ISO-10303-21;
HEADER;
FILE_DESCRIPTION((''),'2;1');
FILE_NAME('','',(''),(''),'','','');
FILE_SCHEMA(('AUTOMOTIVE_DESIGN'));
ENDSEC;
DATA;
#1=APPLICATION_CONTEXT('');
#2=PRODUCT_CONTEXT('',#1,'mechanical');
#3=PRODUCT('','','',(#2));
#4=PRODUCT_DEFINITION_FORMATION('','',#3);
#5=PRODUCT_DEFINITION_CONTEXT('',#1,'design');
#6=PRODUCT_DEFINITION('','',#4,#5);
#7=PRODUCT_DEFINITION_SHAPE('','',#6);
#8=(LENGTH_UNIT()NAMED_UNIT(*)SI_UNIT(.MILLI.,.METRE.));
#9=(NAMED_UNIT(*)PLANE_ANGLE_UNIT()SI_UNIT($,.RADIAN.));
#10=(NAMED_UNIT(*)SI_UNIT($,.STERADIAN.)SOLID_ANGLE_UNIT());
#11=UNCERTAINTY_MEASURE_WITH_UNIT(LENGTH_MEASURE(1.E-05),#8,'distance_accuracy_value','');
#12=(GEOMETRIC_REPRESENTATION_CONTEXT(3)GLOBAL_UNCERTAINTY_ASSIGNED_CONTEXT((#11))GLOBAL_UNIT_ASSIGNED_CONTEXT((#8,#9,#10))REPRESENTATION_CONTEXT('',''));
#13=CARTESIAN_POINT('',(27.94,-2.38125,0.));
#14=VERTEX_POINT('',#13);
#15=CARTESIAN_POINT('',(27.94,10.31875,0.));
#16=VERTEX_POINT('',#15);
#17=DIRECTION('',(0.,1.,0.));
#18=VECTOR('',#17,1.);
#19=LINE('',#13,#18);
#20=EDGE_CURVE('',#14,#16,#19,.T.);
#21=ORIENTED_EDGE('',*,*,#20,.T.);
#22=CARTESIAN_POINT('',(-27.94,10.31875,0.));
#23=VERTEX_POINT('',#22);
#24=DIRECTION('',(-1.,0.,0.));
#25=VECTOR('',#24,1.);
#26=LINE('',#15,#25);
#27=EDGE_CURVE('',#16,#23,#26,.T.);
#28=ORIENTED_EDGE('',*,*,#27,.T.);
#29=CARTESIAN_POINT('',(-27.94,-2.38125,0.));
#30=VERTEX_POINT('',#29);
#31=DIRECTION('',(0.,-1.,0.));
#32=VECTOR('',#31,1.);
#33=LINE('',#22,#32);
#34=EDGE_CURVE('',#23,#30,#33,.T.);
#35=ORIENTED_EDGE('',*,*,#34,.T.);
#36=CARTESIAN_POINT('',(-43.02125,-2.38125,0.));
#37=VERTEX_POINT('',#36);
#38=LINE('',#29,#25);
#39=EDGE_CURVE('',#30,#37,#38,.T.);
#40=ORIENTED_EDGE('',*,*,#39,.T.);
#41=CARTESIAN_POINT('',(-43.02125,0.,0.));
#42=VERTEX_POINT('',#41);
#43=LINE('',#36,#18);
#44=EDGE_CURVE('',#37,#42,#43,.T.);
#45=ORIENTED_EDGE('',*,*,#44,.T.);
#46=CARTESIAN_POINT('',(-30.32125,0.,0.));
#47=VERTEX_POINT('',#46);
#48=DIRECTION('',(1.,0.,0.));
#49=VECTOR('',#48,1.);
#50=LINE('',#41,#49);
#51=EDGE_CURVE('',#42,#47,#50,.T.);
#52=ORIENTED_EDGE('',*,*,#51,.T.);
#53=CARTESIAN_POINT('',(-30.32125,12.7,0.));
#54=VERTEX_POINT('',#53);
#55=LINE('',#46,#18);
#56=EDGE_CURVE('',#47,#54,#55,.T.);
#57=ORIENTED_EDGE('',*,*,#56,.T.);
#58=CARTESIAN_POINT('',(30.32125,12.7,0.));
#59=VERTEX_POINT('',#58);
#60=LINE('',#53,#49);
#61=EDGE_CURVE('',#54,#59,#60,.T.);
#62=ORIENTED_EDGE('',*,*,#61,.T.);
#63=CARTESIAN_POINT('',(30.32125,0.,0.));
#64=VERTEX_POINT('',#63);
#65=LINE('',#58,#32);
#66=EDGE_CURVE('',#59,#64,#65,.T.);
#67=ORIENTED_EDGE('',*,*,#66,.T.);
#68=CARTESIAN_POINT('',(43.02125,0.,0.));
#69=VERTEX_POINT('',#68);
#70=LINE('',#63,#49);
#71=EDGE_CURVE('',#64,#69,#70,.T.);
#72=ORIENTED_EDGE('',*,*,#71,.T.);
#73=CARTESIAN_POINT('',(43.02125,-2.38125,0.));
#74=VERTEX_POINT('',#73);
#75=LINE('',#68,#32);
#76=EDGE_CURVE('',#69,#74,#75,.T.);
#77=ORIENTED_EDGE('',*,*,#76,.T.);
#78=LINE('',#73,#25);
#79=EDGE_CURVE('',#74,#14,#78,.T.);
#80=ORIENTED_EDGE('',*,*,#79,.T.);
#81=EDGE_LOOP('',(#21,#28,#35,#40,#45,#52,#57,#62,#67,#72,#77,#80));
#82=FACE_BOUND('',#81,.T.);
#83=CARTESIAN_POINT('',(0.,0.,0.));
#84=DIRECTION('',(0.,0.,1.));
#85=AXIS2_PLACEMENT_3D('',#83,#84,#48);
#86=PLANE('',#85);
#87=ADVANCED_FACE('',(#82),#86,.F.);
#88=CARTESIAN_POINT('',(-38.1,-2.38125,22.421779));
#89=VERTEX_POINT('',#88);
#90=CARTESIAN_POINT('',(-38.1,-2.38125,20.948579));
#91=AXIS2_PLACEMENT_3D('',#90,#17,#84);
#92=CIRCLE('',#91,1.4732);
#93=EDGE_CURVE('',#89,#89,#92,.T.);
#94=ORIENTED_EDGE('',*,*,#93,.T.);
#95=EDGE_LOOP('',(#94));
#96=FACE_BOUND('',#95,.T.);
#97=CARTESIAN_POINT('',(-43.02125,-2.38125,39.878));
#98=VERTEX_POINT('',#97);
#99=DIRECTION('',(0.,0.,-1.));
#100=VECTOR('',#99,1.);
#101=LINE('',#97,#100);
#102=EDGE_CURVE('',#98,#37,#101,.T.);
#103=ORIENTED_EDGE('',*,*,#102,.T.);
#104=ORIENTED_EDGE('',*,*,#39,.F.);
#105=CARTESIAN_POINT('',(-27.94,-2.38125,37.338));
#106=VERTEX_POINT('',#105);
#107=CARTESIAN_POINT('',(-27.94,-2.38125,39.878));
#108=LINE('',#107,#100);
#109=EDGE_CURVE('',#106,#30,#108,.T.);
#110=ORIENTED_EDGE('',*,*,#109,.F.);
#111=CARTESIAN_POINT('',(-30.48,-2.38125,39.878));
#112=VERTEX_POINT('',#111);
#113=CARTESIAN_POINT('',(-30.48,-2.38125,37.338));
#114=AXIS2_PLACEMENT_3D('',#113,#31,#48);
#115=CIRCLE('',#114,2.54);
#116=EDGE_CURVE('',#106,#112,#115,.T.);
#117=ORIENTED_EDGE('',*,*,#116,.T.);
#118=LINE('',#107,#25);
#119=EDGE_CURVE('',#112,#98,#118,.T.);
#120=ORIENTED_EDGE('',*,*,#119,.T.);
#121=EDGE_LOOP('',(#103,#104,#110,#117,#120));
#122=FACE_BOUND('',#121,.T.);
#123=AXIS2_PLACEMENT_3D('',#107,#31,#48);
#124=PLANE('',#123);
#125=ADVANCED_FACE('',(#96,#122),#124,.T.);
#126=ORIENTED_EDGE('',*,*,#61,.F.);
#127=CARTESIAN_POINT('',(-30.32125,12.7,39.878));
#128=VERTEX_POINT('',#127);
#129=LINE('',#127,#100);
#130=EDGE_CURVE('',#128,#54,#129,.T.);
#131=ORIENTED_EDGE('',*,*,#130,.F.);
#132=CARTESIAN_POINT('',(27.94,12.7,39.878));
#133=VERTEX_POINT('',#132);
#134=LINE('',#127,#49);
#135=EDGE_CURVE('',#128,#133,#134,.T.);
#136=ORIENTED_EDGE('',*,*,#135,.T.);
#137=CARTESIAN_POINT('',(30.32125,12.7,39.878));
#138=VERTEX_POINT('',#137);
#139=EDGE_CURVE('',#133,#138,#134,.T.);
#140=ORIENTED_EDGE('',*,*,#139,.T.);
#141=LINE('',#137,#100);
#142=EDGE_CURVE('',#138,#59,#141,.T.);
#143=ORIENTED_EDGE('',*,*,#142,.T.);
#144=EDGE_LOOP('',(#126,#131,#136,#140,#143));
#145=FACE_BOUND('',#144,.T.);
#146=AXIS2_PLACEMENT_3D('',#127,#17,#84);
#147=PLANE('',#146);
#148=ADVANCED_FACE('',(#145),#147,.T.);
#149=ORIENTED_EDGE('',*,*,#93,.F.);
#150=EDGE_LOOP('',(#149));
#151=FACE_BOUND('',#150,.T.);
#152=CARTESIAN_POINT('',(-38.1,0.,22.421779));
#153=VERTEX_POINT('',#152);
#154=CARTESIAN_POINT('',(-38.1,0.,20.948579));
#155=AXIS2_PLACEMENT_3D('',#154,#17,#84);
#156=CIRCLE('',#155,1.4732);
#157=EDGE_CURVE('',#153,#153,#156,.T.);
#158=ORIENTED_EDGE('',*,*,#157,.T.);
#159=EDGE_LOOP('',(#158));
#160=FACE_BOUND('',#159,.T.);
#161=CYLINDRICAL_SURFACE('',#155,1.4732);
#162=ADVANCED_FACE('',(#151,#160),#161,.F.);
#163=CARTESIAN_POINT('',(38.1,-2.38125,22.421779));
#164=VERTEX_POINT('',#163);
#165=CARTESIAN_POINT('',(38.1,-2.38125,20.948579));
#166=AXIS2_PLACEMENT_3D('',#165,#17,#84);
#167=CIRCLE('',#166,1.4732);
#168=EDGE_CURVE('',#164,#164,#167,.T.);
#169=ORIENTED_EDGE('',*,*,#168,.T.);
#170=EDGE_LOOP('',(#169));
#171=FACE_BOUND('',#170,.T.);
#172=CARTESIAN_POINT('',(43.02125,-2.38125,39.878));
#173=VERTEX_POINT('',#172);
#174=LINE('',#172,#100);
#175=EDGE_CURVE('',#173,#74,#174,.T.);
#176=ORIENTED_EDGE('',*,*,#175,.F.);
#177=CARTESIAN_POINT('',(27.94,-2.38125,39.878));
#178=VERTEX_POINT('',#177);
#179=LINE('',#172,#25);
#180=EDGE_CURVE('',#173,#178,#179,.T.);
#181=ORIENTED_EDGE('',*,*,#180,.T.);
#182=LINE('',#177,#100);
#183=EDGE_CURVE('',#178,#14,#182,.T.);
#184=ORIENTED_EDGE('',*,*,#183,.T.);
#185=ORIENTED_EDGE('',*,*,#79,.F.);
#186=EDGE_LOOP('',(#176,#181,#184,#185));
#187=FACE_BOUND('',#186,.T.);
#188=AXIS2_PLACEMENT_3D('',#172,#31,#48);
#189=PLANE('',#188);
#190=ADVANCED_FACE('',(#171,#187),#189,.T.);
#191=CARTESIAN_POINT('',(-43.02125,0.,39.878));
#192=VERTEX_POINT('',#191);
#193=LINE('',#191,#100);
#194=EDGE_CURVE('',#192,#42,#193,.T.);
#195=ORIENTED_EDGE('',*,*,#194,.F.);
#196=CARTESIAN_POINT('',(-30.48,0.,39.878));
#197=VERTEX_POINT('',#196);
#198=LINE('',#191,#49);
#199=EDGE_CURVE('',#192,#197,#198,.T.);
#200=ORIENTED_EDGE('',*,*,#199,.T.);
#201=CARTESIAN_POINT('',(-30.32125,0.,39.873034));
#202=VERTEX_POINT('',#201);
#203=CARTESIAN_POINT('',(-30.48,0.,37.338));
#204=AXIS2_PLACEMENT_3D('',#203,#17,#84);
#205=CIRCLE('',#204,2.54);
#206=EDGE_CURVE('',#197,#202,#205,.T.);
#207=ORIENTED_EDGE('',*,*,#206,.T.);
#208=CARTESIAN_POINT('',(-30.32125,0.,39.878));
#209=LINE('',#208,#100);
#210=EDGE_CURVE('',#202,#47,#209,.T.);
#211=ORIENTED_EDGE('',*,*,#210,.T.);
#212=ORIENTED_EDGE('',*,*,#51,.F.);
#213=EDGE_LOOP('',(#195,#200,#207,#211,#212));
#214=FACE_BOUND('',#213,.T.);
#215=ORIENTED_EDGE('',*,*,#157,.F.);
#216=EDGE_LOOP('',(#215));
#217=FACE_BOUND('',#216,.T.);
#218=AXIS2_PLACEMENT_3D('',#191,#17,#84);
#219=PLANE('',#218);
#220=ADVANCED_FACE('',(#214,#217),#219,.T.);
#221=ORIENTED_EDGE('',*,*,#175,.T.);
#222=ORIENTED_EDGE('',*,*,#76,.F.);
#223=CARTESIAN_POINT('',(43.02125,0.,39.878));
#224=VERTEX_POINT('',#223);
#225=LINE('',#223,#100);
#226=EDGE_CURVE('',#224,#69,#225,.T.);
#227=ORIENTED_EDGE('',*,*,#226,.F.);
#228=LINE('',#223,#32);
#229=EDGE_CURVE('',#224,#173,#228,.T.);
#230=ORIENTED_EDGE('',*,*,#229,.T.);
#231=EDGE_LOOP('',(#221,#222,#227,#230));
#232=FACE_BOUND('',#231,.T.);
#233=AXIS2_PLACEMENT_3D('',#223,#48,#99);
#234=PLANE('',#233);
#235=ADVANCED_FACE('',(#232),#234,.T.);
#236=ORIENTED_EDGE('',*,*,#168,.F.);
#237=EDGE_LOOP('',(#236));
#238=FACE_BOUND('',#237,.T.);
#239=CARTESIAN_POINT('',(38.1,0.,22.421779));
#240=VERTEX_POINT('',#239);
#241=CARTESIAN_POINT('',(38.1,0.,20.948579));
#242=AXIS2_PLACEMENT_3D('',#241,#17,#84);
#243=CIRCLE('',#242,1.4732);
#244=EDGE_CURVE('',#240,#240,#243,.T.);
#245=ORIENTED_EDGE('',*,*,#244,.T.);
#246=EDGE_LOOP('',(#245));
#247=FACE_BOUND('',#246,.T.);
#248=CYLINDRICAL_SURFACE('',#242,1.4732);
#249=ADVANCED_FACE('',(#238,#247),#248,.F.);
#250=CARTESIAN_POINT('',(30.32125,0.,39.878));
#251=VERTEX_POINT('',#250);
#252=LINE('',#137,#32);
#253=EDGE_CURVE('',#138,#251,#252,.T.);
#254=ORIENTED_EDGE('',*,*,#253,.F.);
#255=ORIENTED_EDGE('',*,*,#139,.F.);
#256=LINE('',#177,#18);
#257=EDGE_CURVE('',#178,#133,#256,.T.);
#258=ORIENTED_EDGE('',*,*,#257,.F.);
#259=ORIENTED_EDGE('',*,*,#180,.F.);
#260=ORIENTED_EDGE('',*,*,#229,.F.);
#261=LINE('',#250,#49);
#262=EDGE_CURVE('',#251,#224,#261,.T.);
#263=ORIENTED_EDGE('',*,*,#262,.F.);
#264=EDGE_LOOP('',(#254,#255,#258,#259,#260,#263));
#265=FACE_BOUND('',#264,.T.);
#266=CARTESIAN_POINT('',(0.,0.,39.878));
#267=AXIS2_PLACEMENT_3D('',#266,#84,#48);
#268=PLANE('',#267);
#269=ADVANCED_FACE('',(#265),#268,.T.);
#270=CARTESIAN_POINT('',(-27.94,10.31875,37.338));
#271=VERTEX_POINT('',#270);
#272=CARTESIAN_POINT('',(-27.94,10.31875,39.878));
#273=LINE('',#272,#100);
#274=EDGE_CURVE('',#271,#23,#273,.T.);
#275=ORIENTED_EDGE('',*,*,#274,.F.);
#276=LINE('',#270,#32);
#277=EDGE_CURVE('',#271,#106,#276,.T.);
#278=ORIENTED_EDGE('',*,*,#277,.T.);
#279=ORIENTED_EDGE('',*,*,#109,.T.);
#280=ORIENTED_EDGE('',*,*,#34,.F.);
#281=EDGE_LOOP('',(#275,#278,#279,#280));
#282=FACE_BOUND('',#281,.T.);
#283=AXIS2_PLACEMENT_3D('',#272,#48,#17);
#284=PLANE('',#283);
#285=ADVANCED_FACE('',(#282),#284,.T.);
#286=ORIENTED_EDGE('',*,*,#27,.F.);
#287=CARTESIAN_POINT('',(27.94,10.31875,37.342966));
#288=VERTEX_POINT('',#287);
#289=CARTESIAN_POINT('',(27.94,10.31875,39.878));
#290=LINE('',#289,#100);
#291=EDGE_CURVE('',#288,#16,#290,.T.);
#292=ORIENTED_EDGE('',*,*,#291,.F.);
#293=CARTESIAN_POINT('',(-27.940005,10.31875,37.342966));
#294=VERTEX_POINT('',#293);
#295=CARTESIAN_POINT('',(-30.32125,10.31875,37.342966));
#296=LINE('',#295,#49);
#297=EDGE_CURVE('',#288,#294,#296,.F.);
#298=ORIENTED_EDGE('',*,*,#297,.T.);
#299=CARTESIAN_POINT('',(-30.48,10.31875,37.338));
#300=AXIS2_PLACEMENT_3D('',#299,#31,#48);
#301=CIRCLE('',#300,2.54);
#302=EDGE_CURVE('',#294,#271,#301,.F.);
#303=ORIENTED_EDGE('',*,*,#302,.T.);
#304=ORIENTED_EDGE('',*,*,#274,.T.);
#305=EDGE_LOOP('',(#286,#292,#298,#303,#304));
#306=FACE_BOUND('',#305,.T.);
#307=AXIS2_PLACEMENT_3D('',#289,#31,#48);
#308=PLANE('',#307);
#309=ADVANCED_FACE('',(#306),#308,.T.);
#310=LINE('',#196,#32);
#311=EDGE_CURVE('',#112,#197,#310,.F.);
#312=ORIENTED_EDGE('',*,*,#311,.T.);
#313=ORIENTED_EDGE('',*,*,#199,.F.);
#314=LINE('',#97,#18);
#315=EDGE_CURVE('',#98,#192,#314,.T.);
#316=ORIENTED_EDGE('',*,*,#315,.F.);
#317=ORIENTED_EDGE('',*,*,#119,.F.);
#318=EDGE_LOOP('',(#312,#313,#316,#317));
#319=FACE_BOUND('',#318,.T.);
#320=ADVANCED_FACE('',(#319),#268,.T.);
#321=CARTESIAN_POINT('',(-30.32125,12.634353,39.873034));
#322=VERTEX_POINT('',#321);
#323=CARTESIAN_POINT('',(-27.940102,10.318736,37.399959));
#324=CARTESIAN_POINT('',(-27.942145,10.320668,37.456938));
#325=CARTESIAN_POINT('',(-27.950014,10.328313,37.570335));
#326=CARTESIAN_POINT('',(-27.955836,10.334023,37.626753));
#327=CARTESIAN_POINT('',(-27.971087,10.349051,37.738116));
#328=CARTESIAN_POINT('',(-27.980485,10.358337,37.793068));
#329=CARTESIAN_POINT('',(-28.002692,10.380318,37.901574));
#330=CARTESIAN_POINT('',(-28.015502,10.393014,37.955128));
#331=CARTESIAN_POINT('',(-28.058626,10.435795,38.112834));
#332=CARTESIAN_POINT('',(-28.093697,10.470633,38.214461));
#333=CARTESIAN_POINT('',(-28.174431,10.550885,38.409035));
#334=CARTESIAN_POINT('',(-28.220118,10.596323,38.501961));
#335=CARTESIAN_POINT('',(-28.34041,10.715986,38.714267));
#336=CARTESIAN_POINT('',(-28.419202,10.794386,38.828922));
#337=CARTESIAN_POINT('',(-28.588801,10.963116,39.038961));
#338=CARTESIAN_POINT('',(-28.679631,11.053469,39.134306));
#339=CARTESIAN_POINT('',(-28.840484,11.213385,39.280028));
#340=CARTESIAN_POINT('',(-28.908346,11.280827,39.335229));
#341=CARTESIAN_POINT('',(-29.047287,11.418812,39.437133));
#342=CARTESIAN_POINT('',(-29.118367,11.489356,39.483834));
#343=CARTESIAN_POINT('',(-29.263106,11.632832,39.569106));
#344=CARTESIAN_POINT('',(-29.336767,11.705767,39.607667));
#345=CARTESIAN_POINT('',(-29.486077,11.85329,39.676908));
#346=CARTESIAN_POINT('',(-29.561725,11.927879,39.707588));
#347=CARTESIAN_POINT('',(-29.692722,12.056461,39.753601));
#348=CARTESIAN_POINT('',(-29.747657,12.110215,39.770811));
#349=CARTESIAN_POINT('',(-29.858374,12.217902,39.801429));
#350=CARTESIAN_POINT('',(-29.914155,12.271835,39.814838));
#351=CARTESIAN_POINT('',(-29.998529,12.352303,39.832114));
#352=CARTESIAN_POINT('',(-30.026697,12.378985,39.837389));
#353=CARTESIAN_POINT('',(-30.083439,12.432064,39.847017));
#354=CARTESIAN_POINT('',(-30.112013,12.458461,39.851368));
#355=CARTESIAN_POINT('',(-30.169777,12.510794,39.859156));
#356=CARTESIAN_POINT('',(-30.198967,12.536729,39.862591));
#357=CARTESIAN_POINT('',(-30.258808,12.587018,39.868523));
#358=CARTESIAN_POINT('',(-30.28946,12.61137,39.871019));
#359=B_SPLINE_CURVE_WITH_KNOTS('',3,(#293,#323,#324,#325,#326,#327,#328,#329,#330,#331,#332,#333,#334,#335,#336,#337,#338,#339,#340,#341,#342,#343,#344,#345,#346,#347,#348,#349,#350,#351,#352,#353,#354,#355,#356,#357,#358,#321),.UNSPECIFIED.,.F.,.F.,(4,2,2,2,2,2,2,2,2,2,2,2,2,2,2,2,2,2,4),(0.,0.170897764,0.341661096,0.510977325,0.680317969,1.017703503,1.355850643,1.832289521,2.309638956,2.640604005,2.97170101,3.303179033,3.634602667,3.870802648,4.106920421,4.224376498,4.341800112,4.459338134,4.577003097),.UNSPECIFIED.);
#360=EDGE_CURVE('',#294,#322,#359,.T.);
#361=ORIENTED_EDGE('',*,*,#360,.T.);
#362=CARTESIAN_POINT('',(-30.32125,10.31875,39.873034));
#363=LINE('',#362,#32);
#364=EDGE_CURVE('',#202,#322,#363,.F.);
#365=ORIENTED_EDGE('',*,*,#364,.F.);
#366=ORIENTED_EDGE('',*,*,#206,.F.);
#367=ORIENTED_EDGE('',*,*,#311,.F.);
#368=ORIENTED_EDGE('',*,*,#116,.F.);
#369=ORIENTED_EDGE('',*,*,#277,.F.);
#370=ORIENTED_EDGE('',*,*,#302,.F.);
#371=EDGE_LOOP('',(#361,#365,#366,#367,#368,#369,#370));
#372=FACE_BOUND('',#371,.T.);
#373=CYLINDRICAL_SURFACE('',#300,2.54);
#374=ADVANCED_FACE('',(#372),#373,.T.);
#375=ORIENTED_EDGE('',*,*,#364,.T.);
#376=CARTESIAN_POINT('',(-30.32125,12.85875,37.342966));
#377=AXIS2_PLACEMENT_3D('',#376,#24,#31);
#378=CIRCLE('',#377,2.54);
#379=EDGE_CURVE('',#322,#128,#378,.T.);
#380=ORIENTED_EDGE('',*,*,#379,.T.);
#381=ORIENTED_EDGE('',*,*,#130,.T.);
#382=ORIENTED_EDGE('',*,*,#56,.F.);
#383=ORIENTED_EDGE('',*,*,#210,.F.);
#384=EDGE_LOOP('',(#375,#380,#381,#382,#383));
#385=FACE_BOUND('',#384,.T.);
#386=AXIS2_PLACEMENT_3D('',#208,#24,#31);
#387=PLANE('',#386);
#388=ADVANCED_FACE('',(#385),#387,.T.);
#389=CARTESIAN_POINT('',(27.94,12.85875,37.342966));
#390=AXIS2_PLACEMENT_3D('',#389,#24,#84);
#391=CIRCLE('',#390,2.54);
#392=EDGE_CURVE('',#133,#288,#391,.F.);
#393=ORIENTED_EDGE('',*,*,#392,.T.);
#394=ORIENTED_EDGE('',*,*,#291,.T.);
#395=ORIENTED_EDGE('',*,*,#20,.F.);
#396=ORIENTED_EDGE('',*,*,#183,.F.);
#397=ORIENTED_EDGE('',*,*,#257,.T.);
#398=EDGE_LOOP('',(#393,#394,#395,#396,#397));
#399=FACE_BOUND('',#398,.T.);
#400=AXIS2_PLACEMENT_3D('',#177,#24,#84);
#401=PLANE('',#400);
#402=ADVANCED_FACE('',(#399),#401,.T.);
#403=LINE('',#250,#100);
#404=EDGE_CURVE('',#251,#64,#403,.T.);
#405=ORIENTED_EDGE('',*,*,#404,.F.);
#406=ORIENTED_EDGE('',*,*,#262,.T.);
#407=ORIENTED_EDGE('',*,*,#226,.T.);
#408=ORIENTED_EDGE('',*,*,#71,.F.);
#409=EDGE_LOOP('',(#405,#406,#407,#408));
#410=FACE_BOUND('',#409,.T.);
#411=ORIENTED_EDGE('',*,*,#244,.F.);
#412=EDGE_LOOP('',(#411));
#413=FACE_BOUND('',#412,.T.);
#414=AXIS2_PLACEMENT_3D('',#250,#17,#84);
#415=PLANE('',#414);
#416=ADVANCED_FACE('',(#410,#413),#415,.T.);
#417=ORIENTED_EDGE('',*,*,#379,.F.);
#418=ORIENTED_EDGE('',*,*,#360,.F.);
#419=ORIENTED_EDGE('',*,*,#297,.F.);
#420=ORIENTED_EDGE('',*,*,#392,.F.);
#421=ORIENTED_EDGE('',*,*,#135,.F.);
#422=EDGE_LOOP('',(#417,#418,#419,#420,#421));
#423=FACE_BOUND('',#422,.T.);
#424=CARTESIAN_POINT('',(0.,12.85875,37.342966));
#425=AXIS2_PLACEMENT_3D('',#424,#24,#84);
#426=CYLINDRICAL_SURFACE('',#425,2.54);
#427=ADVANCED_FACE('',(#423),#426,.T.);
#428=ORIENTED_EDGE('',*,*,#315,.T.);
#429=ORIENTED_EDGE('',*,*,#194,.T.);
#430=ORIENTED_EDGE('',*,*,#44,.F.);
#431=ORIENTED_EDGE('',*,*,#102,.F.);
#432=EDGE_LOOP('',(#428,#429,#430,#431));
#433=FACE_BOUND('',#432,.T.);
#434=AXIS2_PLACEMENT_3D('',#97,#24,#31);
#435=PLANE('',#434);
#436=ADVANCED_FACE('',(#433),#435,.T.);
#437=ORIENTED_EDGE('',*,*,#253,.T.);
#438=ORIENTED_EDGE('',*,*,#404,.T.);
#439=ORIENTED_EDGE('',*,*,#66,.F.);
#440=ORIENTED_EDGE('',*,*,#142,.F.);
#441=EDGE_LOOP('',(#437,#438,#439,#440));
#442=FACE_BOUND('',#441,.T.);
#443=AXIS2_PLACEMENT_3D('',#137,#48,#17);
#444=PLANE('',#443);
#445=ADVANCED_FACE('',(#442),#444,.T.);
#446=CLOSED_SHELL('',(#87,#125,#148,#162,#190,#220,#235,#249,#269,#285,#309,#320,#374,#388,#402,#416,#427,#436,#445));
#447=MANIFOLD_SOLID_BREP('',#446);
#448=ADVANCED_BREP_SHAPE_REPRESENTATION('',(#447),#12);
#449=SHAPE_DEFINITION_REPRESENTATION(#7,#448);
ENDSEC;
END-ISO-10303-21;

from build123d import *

# Parameters (mm, degrees)
BOSS_EXTRUDE1_DEPTH   = 39.878
F_4_CLEARANCE_HOLE1_D = 2.9464
FILLET1_R             = 2.54
FILLET2_R             = 2.54


with BuildPart() as part:
    # Sketch1 → Boss-Extrude1 (new body)
    with BuildSketch(Plane.XY):
        Polygon((-43.02125, 0), (-30.32125, 0), (-30.32125, 12.7), (30.32125, 12.7), (30.32125, 0), (43.02125, 0), (43.02125, -2.38125), (27.94, -2.38125), (27.94, 10.31875), (-27.94, 10.31875), (-27.94, -2.38125), (-43.02125, -2.38125), align=None)
    extrude(amount=BOSS_EXTRUDE1_DEPTH)

    # #4 Clearance Hole1 (through all)
    with Locations(Plane(origin=(0, 0, 0), x_dir=(1, 0, 0), z_dir=(0, 1, 0))):
        with Locations((-38.1, -20.948579073)):
            f_4_clearance_hole1 = Hole(F_4_CLEARANCE_HOLE1_D / 2)

    # Mirror1: #4 Clearance Hole1 across plane
    add(f_4_clearance_hole1.mirror(Plane(origin=(0, 0, 0), x_dir=(0, 0, 1), z_dir=(1, 0, 0))), mode=Mode.SUBTRACT)

    # Fillet1
    # the kernel refuses this fillet: 2.54 mm, written as the material it takes off along each edge
    with BuildSketch(Plane(origin=(-27.94, 10.31875, 39.878), x_dir=(-1, 0, 0), z_dir=(0, -1, 0))) as fillet1_piece_1:
        with BuildLine():
            CenterArc((FILLET1_R, FILLET1_R), FILLET1_R, 180, 90)
            Line((0, FILLET1_R), (0, 0))
            Line((0, 0), (FILLET1_R, 0))
        make_face()
    extrude(amount=19.05, mode=Mode.SUBTRACT)

    # Fillet2
    # the kernel refuses this fillet: 2.54 mm, written as the material it takes off along each edge
    with BuildSketch(Plane(origin=(27.94, 10.31875, 39.878), x_dir=(0, 0, -1), z_dir=(-1, 0, 0))) as fillet2_piece_1_section:
        with BuildLine():
            CenterArc((2.535034208, -2.54), FILLET2_R, 90, 86.416678302)
            Line((0, -2.38125), (0, 0))
            Line((0, 0), (2.535034208, 0))
        make_face()
    fillet2_piece_1 = extrude(amount=64.598835521, mode=Mode.PRIVATE)
    fillet2_piece_1 = fillet2_piece_1 - Plane(origin=(-30.48, 11.003720119, 37.338), x_dir=(-1, 0, 0), z_dir=(0, 1, 0)) * Cylinder(2.54, 140, mode=Mode.PRIVATE)
    add(fillet2_piece_1, mode=Mode.SUBTRACT)


solid = part.part
